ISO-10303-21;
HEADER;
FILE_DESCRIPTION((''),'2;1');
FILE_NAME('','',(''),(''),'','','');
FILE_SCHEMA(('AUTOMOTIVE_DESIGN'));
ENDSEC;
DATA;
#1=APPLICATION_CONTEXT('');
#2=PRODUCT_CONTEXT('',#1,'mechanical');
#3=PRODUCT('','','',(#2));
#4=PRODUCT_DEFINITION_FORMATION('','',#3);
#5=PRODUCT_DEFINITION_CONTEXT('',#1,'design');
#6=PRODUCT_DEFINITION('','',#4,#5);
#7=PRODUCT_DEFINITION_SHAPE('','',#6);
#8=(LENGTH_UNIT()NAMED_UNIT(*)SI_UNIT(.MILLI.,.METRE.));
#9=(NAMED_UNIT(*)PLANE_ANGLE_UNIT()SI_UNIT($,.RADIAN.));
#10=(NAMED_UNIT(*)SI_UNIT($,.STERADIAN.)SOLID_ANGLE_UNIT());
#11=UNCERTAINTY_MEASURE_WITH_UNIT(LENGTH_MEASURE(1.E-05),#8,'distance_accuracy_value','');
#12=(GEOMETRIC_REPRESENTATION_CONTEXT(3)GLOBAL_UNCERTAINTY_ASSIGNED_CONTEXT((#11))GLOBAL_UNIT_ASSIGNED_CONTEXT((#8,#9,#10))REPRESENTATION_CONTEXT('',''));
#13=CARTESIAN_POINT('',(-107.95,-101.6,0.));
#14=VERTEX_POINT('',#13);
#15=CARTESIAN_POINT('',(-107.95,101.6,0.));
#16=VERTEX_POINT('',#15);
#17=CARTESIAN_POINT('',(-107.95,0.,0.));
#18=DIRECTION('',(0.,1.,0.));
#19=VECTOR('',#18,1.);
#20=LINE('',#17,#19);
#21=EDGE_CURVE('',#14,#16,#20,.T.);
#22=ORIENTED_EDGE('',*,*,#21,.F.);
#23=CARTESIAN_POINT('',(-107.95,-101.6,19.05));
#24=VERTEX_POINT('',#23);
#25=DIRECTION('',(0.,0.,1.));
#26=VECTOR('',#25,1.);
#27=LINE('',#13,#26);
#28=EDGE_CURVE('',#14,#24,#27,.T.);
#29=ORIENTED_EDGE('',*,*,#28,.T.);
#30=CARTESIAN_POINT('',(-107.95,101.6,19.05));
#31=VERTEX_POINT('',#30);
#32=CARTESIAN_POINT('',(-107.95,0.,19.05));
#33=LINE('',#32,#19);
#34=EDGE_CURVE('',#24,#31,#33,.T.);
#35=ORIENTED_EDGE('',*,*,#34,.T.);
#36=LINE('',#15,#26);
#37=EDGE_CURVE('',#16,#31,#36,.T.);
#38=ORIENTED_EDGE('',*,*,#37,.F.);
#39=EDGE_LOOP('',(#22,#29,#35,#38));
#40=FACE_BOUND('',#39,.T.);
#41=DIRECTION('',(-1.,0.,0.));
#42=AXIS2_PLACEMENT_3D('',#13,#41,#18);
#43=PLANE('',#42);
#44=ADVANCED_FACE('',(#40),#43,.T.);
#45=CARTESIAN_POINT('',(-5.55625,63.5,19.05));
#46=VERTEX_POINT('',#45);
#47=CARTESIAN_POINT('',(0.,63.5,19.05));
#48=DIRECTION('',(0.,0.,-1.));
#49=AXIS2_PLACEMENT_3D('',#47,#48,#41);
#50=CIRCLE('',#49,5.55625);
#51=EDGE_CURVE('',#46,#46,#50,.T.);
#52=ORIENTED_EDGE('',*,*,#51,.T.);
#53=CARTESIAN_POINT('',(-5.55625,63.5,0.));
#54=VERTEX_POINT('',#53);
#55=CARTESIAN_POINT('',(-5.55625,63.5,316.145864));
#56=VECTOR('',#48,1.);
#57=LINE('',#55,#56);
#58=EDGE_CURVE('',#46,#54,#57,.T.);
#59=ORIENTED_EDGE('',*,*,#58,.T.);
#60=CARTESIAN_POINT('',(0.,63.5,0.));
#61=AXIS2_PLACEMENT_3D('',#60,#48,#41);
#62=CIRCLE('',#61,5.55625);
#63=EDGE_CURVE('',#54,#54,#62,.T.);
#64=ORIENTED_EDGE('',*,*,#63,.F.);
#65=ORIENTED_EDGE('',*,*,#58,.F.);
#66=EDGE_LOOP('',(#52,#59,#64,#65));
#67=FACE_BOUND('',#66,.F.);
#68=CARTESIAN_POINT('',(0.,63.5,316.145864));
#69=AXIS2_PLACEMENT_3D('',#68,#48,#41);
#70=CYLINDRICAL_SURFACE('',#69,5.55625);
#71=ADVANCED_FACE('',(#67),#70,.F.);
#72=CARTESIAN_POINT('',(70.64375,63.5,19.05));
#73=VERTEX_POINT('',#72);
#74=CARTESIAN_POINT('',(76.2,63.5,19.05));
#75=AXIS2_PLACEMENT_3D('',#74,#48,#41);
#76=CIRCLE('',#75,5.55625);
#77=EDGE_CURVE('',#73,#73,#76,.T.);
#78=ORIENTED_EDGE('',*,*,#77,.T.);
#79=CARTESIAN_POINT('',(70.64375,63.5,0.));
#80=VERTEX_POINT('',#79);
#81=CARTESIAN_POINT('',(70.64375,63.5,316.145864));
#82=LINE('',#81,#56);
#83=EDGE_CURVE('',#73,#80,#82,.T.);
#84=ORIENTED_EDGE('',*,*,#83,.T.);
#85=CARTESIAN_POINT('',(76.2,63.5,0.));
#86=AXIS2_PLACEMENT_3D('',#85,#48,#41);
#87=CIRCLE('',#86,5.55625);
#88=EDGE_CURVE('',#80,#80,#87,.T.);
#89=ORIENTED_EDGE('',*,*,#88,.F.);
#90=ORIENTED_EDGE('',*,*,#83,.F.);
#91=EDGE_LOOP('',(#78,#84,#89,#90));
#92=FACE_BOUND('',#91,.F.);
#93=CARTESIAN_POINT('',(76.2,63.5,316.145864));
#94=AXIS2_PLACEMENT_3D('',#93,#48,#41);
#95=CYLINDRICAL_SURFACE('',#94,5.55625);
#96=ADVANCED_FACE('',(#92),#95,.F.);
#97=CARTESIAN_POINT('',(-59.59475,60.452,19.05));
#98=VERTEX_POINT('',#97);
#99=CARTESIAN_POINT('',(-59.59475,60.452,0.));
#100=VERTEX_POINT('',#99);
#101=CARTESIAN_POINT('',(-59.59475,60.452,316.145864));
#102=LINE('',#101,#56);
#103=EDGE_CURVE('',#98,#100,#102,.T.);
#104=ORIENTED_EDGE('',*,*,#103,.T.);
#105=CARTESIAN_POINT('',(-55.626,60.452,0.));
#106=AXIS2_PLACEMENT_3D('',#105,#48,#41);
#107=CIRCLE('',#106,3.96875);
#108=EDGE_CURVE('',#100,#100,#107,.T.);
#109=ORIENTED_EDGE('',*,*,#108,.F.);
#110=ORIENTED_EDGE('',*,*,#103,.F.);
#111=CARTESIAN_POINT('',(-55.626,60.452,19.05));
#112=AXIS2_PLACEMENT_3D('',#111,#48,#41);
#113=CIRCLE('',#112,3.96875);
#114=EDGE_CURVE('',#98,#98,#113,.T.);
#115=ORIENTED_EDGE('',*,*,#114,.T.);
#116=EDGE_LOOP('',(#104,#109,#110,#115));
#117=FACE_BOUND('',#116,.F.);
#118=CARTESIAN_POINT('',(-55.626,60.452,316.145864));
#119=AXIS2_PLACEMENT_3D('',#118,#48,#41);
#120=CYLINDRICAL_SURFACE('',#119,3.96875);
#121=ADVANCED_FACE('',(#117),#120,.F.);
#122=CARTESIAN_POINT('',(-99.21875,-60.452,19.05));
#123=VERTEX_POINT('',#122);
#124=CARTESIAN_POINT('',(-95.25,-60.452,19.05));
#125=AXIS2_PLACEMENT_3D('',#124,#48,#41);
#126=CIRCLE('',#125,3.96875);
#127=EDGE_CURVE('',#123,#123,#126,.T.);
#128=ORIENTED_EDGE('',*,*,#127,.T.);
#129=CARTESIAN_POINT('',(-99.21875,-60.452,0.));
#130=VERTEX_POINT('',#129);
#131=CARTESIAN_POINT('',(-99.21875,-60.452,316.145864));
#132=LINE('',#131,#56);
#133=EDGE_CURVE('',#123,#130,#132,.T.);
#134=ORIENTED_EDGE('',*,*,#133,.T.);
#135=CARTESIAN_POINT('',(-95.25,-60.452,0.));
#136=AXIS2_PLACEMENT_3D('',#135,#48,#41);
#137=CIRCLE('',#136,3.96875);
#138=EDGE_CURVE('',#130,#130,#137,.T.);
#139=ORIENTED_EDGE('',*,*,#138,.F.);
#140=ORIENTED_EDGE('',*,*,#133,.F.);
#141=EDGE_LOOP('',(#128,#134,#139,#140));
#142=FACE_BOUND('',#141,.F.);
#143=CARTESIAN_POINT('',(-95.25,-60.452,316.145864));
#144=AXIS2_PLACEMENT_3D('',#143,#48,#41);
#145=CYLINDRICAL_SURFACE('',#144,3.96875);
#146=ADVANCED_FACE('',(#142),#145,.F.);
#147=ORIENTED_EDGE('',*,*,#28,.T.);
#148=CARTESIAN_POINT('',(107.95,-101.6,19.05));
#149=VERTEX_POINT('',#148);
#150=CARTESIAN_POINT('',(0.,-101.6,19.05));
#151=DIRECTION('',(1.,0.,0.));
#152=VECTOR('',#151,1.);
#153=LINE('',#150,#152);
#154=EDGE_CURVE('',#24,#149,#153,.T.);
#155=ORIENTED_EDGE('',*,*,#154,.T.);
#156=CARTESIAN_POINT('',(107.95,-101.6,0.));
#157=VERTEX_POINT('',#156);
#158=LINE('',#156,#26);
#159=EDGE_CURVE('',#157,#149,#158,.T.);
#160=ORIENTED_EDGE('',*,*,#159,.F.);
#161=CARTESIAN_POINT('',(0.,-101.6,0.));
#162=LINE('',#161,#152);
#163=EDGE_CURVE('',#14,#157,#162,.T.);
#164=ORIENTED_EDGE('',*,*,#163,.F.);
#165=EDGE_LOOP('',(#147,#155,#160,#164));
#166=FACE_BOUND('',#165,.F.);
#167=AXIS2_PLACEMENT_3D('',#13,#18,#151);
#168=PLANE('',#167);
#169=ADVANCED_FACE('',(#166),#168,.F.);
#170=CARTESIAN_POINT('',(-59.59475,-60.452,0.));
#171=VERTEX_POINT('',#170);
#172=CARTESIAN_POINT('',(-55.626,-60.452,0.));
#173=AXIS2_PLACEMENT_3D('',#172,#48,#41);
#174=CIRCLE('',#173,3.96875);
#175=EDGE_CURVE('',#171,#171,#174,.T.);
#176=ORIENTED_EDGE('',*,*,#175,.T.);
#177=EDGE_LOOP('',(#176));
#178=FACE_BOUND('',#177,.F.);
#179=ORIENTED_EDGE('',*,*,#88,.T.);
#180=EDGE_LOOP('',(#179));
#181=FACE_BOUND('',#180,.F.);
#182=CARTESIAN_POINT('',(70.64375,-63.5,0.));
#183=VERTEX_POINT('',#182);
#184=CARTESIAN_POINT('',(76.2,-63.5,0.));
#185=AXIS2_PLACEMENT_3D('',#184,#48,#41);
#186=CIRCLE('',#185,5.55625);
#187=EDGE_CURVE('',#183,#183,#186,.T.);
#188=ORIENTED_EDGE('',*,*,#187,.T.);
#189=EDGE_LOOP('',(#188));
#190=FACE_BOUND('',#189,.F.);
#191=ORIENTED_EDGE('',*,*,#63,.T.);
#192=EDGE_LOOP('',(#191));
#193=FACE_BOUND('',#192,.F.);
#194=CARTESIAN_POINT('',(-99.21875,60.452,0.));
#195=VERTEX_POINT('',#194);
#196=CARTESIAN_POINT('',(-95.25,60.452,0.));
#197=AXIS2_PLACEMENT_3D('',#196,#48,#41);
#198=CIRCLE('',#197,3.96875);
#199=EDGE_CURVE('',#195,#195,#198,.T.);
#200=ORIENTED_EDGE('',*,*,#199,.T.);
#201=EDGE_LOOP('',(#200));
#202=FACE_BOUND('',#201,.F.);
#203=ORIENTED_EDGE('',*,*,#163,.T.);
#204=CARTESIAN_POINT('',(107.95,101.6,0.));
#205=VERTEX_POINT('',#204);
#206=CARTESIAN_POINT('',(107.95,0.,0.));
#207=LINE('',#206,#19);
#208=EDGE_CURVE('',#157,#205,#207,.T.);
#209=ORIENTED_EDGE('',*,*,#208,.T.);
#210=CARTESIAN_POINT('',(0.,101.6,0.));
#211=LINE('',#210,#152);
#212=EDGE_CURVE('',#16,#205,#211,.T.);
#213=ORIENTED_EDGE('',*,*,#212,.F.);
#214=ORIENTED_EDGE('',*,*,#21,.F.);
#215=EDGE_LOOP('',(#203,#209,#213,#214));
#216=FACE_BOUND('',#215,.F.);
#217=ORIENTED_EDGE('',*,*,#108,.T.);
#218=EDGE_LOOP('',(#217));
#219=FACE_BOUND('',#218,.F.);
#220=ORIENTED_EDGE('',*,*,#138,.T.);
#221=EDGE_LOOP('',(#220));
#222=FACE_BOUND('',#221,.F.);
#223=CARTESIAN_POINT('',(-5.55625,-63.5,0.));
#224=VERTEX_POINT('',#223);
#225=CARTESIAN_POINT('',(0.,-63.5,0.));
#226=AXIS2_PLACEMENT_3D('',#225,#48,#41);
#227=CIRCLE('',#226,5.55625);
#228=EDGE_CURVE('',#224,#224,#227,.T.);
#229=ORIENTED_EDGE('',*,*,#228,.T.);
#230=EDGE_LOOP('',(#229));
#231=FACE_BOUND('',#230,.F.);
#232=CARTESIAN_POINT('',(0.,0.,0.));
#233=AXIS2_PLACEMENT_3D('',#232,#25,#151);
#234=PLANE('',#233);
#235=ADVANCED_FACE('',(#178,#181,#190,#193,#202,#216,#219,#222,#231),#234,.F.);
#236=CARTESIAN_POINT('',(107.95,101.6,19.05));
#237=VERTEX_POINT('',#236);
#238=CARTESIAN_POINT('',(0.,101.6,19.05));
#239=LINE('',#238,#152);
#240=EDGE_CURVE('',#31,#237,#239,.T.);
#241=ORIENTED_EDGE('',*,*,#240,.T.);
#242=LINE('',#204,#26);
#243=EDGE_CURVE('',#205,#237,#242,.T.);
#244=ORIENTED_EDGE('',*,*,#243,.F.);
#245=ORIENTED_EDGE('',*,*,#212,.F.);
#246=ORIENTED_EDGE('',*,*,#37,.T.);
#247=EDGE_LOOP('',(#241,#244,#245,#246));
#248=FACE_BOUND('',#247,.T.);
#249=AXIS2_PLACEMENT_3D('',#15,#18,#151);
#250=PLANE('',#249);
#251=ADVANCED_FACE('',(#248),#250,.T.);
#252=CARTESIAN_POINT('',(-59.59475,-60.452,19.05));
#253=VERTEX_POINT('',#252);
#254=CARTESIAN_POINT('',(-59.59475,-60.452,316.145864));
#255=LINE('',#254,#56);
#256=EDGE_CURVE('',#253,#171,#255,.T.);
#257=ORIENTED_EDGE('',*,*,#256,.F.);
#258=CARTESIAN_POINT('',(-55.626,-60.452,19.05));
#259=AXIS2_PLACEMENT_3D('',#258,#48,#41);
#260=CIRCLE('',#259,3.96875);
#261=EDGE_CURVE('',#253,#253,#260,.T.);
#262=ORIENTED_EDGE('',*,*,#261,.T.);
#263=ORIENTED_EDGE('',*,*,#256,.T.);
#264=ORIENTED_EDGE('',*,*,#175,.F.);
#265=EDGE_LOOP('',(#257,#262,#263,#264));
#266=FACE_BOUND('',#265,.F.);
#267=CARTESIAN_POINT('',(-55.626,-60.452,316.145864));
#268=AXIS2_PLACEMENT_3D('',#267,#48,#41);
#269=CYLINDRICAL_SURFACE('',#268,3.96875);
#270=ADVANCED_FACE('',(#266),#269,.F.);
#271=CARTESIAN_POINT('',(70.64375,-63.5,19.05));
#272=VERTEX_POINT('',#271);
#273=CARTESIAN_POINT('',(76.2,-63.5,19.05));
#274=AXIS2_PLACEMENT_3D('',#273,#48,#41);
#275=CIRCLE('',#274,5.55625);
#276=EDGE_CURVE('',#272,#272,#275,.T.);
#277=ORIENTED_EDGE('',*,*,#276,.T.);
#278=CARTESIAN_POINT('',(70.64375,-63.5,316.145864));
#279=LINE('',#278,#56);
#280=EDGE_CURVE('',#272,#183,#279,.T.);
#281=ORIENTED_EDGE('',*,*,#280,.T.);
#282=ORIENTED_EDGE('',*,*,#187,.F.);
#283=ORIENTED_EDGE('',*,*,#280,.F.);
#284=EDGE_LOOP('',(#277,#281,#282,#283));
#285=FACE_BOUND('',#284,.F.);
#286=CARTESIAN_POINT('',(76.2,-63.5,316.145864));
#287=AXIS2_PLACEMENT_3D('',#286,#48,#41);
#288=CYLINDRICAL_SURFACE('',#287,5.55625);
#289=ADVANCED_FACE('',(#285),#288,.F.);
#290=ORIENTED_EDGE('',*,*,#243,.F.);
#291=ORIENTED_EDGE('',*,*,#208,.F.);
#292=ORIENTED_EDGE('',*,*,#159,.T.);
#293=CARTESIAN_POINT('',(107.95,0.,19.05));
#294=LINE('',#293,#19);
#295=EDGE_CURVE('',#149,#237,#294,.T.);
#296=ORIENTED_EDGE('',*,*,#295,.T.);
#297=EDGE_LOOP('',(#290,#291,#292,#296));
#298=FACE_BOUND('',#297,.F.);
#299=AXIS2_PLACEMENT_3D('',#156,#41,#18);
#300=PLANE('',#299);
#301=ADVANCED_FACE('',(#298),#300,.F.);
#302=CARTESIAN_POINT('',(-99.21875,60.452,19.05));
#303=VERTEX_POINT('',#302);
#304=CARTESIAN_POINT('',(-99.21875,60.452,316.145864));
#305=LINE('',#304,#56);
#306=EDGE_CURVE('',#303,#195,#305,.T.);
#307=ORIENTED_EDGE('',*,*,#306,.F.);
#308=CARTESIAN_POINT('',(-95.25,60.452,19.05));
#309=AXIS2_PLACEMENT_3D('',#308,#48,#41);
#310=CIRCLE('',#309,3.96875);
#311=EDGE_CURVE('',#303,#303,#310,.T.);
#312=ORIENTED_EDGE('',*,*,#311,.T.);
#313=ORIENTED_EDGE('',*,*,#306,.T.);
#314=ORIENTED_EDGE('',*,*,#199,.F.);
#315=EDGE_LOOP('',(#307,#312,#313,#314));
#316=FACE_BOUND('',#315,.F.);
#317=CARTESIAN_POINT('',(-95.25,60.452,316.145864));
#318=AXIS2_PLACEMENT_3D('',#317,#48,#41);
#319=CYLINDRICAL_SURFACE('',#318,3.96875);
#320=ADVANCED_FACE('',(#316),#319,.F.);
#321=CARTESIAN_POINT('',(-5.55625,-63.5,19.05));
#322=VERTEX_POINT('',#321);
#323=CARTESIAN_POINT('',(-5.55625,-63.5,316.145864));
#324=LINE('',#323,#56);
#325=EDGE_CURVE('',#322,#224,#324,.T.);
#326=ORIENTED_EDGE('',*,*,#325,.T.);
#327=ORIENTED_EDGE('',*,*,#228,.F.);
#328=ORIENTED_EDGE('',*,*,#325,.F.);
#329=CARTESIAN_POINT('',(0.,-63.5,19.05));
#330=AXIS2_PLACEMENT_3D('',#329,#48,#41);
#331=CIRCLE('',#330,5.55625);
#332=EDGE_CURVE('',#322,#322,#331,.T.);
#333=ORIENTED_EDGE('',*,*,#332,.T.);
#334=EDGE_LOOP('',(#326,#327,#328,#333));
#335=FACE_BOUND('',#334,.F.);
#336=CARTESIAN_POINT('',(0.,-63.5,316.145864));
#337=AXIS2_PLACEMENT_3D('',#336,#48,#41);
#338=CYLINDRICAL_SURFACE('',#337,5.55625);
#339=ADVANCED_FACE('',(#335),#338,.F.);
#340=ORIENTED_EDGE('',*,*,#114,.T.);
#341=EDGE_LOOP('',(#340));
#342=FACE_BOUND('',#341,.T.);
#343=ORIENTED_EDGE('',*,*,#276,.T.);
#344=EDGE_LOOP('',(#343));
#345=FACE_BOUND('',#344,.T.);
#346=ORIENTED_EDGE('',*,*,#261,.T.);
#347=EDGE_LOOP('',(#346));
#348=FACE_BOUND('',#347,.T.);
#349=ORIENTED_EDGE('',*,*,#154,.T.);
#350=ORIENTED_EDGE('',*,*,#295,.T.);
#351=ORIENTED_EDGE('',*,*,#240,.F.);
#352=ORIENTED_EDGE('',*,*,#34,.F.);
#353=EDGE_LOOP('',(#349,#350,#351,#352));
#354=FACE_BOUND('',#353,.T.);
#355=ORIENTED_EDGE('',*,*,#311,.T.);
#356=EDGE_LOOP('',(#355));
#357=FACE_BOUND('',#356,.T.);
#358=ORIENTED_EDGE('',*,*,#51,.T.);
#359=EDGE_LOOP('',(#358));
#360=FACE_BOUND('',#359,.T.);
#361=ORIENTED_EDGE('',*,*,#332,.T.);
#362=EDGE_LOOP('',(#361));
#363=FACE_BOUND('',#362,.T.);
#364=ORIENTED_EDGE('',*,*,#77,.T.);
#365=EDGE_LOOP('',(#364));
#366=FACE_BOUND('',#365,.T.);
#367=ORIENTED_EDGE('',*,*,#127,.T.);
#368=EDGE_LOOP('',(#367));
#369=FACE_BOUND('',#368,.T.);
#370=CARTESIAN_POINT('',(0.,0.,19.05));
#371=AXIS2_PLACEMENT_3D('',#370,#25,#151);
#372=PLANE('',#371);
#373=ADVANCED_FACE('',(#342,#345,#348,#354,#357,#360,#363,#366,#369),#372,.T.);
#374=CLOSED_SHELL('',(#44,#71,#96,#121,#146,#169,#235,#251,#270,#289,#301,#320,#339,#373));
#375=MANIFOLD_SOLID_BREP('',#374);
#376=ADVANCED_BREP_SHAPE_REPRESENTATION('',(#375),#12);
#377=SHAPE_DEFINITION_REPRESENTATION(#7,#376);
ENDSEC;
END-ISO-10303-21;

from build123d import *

# Parameters (mm, degrees)
F0_W     = 215.9
F0_H     = 203.2
F1_DEPTH = 19.05
F3_D     = 11.1125
F5_D     = 7.9375


# Not quite as in the source:
# - a length typed as a fraction of an inch, garbled in the dataset ("3 / 203.2 mm" for 3/8 in), is restored


with BuildPart() as f1:
    # F0 (on Top) → F1 (new body)
    with BuildSketch(Plane.XY):
        Rectangle(F0_W, F0_H)
    extrude(amount=F1_DEPTH)

    # F3 (through all)
    with Locations(Plane.XY.offset(19.05)):
        with Locations((0, -63.5), (76.2, -63.5), (76.2, 63.5), (0, 63.5)):
            Hole(F3_D / 2)

    # F5 (through all)
    with Locations(Plane.XY.offset(19.05)):
        with Locations((-95.25, 60.452), (-55.626, 60.452), (-95.25, -60.452), (-55.626, -60.452)):
            Hole(F5_D / 2)


solid = f1.part
